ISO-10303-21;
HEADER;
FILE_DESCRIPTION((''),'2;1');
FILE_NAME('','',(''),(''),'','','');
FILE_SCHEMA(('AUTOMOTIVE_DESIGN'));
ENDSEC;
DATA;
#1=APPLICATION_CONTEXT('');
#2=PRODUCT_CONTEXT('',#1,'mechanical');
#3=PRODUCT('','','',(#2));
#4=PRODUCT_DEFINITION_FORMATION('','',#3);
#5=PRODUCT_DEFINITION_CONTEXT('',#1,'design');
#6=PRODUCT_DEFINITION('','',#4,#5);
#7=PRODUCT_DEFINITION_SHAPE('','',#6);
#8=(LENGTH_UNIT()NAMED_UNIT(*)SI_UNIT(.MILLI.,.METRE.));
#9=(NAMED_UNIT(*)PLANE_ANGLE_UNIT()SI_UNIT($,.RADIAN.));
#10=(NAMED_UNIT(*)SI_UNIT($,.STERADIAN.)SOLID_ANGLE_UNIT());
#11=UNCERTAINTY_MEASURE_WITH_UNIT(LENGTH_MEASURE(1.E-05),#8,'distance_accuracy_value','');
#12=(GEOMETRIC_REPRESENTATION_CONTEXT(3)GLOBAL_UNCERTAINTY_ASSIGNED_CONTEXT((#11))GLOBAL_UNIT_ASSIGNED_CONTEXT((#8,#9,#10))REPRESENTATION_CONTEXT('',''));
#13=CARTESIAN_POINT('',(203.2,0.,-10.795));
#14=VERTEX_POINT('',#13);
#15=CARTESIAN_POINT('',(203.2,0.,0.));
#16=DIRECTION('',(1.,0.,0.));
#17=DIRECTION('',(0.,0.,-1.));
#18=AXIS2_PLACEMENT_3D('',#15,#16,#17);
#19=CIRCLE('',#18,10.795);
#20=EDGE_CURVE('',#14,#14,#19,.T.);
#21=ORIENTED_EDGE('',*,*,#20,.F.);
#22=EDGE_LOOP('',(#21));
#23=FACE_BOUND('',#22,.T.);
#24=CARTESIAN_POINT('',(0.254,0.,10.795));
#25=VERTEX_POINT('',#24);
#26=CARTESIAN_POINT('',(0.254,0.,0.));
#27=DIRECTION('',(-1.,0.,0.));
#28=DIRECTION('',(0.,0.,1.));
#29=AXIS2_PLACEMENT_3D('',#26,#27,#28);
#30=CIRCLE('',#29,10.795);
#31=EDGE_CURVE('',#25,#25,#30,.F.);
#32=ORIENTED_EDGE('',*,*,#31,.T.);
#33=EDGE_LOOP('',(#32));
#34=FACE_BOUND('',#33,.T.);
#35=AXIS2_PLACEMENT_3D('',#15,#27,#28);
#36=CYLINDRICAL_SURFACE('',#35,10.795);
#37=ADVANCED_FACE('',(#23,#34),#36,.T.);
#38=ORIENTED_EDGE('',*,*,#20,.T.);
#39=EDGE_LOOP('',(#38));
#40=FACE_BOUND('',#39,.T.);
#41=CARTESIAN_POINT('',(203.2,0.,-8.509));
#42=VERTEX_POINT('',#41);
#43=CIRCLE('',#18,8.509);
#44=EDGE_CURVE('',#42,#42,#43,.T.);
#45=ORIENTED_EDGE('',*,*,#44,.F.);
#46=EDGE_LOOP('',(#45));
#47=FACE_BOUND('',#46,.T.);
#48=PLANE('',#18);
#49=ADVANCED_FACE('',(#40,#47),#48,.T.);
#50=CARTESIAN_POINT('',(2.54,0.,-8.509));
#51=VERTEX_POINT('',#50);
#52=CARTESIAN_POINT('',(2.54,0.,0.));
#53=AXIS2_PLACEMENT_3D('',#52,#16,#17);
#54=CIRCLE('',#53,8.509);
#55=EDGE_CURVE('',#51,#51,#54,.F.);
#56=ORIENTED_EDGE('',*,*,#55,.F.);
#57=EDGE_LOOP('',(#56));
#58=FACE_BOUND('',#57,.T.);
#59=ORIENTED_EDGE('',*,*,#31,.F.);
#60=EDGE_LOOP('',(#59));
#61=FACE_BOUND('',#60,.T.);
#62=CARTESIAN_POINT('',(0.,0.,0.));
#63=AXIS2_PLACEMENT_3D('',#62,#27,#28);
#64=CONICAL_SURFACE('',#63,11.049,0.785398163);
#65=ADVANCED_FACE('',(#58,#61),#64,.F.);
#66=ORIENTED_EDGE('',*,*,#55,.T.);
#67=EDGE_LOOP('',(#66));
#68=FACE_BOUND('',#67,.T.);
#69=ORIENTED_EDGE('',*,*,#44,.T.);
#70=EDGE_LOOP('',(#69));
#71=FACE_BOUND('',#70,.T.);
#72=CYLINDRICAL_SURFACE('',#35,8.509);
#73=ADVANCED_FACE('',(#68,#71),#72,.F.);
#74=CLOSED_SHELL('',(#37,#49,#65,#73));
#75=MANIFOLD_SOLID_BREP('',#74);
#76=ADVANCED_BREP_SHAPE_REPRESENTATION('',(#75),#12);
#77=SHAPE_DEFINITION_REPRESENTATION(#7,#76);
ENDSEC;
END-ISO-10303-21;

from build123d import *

# Parameters (mm, degrees)
SKETCH1_R           = 10.795
SKETCH1_R_2         = 8.509
BOSS_EXTRUDE1_DEPTH = 203.2
CHAMFER1_SIZE       = 2.54


with BuildPart() as part:
    # Sketch1 → Boss-Extrude1 (new body)
    with BuildSketch(Plane(origin=(0, 0, 0), x_dir=(0, 0, -1), z_dir=(1, 0, 0))):
        Circle(SKETCH1_R)
        Circle(SKETCH1_R_2, mode=Mode.SUBTRACT)
    extrude(amount=BOSS_EXTRUDE1_DEPTH)

    # Chamfer1
    # the kernel refuses this chamfer: 2.54 mm, written as the material it takes off along each edge
    with BuildSketch(Plane(origin=(0, 0, 0), x_dir=(0, 0, -1), z_dir=(0, -1, 0))) as chamfer1_piece_1:
        Polygon((8.509, CHAMFER1_SIZE), (8.509 + CHAMFER1_SIZE, 0), (8.509, 0), align=None)
    revolve(axis=Axis((0, 0, 0), (1, 0, 0)), mode=Mode.SUBTRACT)


solid = part.part
